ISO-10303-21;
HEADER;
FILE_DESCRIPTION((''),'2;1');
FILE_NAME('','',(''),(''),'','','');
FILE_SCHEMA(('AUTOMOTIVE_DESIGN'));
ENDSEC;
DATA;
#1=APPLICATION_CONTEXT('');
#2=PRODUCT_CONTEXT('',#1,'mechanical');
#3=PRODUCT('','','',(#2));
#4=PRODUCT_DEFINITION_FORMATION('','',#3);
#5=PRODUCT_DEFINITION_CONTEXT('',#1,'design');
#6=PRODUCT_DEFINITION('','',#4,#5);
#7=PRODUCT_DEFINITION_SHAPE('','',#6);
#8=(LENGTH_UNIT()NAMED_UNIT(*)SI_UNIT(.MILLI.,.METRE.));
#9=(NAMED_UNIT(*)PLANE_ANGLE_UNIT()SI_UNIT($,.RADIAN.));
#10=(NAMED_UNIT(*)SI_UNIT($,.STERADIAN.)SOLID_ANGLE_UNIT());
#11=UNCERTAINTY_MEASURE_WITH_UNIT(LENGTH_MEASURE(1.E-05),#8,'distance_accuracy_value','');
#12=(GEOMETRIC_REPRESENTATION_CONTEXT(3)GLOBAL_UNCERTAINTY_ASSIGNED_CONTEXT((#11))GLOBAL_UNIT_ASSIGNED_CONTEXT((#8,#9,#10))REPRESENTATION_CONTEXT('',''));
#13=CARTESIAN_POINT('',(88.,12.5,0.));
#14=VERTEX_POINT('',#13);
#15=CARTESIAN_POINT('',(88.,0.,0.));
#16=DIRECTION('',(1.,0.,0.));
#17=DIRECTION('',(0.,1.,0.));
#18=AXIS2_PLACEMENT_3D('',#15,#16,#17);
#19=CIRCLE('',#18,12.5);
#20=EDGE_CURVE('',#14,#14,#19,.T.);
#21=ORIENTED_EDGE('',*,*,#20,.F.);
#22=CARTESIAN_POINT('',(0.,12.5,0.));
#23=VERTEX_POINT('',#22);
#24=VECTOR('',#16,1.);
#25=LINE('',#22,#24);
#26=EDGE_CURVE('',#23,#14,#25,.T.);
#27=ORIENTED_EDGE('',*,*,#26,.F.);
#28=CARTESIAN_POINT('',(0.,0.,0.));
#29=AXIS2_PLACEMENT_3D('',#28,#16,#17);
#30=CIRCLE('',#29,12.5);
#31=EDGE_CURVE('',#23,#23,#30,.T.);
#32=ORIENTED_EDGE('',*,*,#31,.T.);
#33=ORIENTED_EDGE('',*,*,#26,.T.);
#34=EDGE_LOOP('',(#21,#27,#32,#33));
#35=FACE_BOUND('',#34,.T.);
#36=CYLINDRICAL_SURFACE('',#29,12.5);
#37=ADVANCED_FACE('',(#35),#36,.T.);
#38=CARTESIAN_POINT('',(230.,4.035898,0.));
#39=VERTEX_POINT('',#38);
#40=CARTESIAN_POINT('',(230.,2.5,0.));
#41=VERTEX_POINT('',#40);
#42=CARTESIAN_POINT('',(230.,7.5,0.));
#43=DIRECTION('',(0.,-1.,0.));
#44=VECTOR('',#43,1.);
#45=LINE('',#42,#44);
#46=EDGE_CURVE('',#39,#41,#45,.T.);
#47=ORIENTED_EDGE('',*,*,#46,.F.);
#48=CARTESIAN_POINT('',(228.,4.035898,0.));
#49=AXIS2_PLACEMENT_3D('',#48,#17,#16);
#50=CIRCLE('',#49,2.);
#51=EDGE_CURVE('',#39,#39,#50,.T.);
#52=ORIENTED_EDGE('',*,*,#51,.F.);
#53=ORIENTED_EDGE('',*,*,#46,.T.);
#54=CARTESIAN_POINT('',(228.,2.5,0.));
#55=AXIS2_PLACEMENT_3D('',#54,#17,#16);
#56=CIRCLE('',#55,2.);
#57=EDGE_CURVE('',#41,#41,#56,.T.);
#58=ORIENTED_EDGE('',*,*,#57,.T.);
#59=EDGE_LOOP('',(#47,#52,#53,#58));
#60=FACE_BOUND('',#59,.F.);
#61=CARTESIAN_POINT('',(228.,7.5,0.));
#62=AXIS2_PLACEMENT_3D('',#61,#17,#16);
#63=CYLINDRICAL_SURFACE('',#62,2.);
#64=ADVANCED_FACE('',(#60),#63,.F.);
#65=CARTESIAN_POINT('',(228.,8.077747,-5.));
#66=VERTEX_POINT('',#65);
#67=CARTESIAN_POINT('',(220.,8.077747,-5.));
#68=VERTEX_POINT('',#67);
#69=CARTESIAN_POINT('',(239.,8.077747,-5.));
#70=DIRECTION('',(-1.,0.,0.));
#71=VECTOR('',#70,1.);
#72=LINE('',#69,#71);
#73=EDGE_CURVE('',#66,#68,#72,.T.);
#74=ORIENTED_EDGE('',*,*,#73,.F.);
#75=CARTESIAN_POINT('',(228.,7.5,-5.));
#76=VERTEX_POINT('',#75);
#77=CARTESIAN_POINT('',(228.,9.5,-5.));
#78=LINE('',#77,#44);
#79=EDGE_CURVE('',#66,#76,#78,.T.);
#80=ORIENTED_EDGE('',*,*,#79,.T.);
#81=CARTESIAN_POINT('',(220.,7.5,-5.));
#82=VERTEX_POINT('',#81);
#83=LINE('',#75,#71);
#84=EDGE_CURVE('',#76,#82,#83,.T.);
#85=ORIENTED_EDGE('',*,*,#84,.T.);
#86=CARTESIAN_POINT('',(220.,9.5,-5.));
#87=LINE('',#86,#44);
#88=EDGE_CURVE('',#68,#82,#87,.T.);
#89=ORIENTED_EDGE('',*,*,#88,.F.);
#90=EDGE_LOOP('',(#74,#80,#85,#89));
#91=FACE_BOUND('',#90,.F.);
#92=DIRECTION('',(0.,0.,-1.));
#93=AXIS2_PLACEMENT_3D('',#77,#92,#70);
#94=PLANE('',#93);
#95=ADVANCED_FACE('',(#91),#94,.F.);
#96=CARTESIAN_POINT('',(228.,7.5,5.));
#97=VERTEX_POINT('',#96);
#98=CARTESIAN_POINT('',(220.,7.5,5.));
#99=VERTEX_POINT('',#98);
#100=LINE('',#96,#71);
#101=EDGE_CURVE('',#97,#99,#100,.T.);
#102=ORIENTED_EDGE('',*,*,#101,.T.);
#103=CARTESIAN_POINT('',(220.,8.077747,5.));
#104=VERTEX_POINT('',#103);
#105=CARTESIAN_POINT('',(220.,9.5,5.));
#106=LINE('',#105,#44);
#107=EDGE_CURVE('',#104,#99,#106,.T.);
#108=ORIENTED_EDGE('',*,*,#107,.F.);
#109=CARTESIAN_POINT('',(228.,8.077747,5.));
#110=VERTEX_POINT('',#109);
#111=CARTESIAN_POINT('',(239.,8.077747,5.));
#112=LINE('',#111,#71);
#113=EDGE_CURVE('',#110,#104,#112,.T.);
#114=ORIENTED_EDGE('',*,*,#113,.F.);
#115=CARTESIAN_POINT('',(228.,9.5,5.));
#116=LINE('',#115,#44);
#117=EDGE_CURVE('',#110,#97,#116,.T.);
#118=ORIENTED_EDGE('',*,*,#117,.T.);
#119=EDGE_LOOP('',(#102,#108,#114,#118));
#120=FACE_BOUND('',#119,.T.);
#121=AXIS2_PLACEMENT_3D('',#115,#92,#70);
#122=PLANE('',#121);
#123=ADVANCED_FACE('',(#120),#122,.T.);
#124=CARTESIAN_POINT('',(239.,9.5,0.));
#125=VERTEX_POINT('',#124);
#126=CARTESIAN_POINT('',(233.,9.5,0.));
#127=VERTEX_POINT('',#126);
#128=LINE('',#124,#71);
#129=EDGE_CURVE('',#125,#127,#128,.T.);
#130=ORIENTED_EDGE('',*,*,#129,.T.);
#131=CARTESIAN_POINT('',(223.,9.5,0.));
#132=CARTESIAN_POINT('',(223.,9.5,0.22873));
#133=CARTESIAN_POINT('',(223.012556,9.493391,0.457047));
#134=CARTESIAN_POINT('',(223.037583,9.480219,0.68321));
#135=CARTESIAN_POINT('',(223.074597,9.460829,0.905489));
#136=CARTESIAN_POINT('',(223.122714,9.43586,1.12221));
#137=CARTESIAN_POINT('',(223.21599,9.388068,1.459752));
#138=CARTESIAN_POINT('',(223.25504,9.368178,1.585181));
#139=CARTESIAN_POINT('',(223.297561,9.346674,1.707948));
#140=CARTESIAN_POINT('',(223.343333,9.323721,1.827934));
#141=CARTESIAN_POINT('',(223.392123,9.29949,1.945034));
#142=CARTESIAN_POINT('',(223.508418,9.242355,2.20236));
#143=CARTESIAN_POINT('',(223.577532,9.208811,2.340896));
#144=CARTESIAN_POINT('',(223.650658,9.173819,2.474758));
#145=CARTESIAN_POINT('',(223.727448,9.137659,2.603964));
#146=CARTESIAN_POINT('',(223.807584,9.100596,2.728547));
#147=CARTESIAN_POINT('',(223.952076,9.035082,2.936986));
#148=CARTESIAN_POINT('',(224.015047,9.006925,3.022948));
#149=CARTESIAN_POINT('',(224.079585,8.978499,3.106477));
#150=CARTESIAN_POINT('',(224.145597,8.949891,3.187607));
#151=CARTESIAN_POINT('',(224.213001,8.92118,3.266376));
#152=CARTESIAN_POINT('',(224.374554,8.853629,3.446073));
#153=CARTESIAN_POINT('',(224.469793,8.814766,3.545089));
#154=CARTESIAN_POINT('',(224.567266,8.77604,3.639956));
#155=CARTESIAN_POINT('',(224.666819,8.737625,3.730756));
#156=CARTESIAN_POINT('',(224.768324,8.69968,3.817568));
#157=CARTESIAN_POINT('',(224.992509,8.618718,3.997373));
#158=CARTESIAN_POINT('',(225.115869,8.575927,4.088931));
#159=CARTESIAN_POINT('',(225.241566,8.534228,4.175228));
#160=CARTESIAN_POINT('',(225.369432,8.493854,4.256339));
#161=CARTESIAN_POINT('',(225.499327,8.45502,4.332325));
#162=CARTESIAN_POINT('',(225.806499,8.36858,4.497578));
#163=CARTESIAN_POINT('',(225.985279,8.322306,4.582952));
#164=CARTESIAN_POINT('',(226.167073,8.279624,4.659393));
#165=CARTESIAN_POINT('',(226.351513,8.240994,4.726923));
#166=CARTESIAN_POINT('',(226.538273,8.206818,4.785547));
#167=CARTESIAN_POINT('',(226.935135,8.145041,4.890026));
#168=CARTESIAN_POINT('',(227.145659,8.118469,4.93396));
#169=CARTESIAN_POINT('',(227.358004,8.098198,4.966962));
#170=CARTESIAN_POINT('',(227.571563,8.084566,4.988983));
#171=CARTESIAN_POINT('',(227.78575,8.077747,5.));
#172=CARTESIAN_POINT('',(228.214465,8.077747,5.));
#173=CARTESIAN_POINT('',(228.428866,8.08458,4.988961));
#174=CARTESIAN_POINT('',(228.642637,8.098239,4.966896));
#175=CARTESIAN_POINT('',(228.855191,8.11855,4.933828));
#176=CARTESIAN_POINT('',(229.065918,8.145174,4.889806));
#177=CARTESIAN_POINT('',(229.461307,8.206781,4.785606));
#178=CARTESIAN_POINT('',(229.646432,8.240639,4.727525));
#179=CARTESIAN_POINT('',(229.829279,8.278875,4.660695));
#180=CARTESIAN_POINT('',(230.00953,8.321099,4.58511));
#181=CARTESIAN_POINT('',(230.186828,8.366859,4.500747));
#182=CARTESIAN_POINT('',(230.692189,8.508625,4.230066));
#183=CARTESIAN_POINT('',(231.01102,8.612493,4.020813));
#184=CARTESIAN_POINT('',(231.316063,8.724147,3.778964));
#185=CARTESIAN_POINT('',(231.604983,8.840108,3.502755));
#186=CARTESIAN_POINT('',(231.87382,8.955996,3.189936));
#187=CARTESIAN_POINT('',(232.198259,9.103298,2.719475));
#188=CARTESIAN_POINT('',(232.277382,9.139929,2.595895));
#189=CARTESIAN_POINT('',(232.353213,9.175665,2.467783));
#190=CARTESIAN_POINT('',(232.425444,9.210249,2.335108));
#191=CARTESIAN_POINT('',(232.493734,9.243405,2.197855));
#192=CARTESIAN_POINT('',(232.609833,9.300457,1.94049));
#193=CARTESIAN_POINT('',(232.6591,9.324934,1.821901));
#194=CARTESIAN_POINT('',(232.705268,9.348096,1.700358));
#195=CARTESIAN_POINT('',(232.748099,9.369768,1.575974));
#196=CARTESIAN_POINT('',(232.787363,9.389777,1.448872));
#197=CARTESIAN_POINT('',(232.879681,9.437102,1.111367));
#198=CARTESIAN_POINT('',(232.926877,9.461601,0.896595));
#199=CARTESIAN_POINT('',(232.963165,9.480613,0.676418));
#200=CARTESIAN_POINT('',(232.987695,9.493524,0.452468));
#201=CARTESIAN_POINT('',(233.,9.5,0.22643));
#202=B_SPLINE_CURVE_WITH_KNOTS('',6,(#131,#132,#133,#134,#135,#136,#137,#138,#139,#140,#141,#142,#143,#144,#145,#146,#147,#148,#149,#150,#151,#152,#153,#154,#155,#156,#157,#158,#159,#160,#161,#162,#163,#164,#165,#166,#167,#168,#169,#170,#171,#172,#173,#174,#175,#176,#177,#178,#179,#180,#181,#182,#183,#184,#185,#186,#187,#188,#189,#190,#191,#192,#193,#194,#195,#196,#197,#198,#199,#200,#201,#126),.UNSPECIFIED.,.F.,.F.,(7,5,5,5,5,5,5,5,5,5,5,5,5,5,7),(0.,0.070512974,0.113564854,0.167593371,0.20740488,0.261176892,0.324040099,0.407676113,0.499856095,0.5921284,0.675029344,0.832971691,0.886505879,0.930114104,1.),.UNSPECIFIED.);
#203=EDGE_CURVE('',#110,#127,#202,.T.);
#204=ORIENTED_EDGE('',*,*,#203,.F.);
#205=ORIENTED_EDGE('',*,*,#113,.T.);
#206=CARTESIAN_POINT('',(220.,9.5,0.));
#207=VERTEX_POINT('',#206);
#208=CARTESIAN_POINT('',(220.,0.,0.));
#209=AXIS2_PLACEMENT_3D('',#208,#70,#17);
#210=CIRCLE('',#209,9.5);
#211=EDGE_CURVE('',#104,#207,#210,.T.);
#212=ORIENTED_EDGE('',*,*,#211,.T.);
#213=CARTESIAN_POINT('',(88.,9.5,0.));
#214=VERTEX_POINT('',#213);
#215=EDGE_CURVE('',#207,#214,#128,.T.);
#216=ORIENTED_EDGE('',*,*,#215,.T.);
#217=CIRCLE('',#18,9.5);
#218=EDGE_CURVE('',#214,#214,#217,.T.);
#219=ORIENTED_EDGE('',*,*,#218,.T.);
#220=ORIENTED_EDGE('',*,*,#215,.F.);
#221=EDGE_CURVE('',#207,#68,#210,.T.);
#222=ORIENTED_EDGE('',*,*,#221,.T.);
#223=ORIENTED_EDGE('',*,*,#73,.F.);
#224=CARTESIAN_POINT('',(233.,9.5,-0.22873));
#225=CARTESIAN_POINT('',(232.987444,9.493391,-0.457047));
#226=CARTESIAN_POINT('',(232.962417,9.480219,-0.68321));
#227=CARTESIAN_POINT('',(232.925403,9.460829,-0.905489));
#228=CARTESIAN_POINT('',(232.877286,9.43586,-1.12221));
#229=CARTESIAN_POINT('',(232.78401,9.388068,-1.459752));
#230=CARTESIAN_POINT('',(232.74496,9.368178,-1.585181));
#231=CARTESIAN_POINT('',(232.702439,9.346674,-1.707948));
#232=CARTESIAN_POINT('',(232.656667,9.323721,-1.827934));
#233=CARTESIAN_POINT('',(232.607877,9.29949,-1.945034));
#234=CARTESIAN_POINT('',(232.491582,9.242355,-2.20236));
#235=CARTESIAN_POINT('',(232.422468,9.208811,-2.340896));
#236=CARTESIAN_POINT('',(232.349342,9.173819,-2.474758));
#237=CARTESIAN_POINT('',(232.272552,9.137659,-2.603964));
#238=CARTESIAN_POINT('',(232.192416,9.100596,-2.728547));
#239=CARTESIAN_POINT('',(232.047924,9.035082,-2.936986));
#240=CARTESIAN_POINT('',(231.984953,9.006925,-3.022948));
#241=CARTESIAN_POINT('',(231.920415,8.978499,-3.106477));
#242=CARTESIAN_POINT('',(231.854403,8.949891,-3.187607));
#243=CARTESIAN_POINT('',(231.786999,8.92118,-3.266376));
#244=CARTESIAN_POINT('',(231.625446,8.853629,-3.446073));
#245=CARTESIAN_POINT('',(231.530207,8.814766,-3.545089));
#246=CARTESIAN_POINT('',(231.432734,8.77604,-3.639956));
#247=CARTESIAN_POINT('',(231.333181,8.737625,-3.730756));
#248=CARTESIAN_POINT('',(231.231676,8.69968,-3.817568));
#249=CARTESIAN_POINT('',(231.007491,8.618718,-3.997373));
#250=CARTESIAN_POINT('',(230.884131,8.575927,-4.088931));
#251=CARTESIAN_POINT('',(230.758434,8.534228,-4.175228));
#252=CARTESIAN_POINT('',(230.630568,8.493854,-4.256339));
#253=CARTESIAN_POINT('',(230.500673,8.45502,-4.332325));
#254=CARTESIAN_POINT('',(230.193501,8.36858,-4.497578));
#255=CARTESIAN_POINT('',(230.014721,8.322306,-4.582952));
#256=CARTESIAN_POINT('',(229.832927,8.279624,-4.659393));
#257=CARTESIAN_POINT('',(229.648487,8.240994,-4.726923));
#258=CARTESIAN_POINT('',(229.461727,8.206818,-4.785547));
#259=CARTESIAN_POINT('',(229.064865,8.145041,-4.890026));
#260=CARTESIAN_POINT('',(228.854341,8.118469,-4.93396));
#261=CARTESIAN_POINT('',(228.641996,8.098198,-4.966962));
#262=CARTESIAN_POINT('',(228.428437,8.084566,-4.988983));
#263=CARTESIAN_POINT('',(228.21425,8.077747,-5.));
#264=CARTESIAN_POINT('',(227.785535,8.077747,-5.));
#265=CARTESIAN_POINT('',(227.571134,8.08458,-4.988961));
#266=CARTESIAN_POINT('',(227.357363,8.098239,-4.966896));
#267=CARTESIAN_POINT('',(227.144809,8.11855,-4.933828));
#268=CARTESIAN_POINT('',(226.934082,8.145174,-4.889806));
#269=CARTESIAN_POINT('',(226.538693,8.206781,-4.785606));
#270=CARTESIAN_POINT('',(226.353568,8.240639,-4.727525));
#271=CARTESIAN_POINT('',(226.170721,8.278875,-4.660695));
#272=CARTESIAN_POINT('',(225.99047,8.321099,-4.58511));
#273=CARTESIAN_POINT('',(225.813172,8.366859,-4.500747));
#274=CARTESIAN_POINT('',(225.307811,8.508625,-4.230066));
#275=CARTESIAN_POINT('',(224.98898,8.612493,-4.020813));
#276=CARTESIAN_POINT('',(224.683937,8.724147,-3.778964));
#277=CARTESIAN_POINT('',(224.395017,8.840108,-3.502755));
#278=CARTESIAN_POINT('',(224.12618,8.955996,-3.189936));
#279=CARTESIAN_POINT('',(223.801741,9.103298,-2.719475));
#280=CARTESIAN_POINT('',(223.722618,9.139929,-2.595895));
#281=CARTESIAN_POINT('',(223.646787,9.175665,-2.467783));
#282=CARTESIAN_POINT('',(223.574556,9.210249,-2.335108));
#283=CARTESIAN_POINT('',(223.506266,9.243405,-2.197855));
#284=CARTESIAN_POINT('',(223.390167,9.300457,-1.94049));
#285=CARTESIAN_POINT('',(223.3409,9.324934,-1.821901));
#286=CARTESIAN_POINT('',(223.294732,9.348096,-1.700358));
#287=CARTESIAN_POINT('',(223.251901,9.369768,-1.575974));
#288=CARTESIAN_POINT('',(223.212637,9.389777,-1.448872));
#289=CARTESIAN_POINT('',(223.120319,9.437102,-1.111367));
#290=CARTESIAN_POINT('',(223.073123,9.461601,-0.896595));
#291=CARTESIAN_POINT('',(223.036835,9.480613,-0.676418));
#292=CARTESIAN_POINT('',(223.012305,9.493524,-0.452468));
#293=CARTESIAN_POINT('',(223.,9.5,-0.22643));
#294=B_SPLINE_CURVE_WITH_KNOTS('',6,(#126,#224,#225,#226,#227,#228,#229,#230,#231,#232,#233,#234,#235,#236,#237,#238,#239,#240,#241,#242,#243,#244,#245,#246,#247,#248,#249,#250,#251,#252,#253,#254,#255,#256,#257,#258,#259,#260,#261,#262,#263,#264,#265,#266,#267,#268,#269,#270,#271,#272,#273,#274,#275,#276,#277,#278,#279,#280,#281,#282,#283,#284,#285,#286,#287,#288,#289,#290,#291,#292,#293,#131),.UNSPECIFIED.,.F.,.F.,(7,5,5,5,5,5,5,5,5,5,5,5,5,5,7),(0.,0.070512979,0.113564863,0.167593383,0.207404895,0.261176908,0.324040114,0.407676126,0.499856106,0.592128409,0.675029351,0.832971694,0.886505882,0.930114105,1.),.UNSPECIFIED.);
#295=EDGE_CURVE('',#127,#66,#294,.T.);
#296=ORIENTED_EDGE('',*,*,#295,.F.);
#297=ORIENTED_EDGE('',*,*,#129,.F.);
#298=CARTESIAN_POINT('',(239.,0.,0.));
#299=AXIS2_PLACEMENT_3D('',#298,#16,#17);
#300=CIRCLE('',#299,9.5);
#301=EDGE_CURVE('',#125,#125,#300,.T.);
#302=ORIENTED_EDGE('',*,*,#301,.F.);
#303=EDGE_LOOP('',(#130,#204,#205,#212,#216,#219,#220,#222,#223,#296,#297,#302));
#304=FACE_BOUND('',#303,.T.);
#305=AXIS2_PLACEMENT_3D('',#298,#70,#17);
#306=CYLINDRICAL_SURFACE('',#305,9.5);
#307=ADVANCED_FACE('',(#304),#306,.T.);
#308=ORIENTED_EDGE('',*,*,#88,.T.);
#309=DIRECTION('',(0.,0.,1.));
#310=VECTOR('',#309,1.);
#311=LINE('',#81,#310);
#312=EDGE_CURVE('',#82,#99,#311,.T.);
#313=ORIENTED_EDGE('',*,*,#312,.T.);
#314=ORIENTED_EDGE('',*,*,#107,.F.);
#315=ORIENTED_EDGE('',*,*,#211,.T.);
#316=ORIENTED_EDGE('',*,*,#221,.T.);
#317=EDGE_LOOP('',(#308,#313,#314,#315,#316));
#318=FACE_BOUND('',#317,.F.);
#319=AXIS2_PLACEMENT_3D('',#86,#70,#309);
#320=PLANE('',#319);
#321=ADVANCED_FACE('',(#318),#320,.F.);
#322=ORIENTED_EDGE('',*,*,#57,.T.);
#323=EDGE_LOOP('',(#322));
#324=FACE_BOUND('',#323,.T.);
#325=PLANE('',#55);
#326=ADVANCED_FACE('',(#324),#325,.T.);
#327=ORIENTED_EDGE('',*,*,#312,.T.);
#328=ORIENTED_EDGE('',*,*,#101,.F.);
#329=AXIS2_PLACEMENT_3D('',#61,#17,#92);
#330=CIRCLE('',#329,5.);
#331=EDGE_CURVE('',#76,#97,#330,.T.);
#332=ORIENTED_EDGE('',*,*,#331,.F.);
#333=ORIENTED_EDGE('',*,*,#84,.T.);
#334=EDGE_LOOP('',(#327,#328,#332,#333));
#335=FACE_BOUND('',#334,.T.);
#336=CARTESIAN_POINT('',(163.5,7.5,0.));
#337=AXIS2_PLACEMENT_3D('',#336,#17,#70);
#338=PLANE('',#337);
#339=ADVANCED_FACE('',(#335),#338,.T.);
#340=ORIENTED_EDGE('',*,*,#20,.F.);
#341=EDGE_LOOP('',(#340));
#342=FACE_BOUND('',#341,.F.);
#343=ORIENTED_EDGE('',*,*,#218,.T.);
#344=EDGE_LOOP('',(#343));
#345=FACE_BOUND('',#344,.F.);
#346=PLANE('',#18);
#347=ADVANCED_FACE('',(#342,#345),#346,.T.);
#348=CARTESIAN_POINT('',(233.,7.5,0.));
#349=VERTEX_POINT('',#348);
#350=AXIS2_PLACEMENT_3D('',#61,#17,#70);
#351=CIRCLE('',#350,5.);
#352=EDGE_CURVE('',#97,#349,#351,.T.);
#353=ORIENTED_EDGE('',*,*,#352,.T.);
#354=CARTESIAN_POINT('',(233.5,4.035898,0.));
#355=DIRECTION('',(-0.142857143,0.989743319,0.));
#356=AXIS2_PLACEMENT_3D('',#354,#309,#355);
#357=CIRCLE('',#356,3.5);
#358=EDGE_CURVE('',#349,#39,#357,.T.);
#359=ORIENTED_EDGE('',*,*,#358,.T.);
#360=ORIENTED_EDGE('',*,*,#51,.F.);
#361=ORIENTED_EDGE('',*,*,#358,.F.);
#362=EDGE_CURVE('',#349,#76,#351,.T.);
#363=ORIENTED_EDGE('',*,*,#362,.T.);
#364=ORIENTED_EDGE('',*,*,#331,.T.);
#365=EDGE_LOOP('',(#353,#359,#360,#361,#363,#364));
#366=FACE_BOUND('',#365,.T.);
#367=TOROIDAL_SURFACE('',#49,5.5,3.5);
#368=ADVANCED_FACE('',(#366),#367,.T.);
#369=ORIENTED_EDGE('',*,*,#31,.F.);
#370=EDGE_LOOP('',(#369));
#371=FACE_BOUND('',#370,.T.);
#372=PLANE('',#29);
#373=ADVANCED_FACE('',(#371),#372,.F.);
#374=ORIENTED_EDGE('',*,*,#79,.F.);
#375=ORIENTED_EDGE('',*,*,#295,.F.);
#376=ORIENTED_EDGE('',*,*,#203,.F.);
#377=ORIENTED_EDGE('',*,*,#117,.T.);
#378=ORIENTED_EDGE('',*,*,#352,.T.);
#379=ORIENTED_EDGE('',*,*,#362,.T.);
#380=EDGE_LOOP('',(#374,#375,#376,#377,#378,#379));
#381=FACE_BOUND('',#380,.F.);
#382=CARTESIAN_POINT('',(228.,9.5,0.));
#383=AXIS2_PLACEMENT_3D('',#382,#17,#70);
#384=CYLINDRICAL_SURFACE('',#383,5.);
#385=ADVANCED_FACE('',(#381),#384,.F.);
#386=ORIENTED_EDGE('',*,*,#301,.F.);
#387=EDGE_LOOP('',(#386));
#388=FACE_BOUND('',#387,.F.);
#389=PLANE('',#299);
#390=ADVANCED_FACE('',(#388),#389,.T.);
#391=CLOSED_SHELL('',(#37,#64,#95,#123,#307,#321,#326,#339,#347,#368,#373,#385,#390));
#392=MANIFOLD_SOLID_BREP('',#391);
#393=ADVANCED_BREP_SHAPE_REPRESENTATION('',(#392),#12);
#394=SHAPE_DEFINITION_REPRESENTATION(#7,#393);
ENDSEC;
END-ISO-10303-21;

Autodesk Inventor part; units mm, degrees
ref_plane "YZ Plane" through (0, 0, 0) normal (1, 0, 0) x (0, 1, 0)
sketch "Sketch1" plane through (0, 0, 0) normal (0, 0, 1) x (1, 0, 0)
  line L0 (0, 0) -> (239, 0)
  line L1 (239, 0) -> (239, 9.5)
  line L2 (0, 0) -> (0, 12.5)
  line L3 (0, 12.5) -> (88, 12.5)
  line L4 (239, 9.5) -> (88, 9.5)
  line L5 (88, 9.5) -> (88, 12.5)
  dimension "d1" = 9.5
  dimension "d3" = 12.5
  dimension "d19" = 88
  dimension "d21" = 151
revolve "Revolution1" add sketch "Sketch1" angle 360 about axis through (0, 0, 0) along (1, 0, 0)
ref_plane "Work Plane3" through (44, 12.5, 0) normal (0, 1, 0) x (-1, 0, 0)
ref_plane "Work Plane4" through (44, 12.5, 0) normal (0, 1, 0) x (-1, 0, 0)
ref_plane "Work Plane5" through (163.5, 9.5, 0) normal (0, 1, 0) x (-1, 0, 0)
sketch "Sketch6" plane through (163.5, 9.5, 0) normal (0, 1, 0) x (-1, 0, 0)
  line L0 (-75.5, 9.5) -> (-75.5, -9.5) projected
  circle A0 centre (-64.5, 0) radius 5
  point P0 (163.5, 0)
  point P1 (-75.5, 0)
  dimension "d27" = 10
  dimension "d28" = 11
extrude "Extrusion5" cut sketch "Sketch6" against normal blind 2
sketch "Sketch7" plane through (228, 7.5, 0) normal (0, 1, 0) x (1, 0, 0)
  circle A0 centre (0, 0) radius 2
  point P0 (-228, 0)
  dimension "d32" = 4
extrude "Extrusion6" cut sketch "Sketch7" against normal blind 5
fillet "Fillet2" radius 3.5 1 edges at (226, 7.5, 0)
sketch "Sketch8" plane through (44, 12.5, 0) normal (0, 1, 0) x (-1, 0, 0)
  point P0 (44, 0)
sketch "Sketch9" plane through (163.5, 9.5, 0) normal (0, 1, 0) x (-1, 0, 0)
  circle A0 centre (-64.5, 0) radius 5 projected
  line L0 (-64.5, 5) -> (-56.5, 5)
  line L1 (-64.5, -5) -> (-56.5, -5)
  line L2 (-56.5, -5) -> (-56.5, 5)
  point P0 (163.5, 0)
  dimension "d36" = 8
  dimension "d37" = 8
extrude "Extrusion7" cut sketch "Sketch9" against normal blind 2 contours A0 L0 L2 L1
ref_plane "Work Plane6" through (0, 4.75, 0) normal (0, 1, 0) x (-1, 0, 0)
properties part number "eixo final"
